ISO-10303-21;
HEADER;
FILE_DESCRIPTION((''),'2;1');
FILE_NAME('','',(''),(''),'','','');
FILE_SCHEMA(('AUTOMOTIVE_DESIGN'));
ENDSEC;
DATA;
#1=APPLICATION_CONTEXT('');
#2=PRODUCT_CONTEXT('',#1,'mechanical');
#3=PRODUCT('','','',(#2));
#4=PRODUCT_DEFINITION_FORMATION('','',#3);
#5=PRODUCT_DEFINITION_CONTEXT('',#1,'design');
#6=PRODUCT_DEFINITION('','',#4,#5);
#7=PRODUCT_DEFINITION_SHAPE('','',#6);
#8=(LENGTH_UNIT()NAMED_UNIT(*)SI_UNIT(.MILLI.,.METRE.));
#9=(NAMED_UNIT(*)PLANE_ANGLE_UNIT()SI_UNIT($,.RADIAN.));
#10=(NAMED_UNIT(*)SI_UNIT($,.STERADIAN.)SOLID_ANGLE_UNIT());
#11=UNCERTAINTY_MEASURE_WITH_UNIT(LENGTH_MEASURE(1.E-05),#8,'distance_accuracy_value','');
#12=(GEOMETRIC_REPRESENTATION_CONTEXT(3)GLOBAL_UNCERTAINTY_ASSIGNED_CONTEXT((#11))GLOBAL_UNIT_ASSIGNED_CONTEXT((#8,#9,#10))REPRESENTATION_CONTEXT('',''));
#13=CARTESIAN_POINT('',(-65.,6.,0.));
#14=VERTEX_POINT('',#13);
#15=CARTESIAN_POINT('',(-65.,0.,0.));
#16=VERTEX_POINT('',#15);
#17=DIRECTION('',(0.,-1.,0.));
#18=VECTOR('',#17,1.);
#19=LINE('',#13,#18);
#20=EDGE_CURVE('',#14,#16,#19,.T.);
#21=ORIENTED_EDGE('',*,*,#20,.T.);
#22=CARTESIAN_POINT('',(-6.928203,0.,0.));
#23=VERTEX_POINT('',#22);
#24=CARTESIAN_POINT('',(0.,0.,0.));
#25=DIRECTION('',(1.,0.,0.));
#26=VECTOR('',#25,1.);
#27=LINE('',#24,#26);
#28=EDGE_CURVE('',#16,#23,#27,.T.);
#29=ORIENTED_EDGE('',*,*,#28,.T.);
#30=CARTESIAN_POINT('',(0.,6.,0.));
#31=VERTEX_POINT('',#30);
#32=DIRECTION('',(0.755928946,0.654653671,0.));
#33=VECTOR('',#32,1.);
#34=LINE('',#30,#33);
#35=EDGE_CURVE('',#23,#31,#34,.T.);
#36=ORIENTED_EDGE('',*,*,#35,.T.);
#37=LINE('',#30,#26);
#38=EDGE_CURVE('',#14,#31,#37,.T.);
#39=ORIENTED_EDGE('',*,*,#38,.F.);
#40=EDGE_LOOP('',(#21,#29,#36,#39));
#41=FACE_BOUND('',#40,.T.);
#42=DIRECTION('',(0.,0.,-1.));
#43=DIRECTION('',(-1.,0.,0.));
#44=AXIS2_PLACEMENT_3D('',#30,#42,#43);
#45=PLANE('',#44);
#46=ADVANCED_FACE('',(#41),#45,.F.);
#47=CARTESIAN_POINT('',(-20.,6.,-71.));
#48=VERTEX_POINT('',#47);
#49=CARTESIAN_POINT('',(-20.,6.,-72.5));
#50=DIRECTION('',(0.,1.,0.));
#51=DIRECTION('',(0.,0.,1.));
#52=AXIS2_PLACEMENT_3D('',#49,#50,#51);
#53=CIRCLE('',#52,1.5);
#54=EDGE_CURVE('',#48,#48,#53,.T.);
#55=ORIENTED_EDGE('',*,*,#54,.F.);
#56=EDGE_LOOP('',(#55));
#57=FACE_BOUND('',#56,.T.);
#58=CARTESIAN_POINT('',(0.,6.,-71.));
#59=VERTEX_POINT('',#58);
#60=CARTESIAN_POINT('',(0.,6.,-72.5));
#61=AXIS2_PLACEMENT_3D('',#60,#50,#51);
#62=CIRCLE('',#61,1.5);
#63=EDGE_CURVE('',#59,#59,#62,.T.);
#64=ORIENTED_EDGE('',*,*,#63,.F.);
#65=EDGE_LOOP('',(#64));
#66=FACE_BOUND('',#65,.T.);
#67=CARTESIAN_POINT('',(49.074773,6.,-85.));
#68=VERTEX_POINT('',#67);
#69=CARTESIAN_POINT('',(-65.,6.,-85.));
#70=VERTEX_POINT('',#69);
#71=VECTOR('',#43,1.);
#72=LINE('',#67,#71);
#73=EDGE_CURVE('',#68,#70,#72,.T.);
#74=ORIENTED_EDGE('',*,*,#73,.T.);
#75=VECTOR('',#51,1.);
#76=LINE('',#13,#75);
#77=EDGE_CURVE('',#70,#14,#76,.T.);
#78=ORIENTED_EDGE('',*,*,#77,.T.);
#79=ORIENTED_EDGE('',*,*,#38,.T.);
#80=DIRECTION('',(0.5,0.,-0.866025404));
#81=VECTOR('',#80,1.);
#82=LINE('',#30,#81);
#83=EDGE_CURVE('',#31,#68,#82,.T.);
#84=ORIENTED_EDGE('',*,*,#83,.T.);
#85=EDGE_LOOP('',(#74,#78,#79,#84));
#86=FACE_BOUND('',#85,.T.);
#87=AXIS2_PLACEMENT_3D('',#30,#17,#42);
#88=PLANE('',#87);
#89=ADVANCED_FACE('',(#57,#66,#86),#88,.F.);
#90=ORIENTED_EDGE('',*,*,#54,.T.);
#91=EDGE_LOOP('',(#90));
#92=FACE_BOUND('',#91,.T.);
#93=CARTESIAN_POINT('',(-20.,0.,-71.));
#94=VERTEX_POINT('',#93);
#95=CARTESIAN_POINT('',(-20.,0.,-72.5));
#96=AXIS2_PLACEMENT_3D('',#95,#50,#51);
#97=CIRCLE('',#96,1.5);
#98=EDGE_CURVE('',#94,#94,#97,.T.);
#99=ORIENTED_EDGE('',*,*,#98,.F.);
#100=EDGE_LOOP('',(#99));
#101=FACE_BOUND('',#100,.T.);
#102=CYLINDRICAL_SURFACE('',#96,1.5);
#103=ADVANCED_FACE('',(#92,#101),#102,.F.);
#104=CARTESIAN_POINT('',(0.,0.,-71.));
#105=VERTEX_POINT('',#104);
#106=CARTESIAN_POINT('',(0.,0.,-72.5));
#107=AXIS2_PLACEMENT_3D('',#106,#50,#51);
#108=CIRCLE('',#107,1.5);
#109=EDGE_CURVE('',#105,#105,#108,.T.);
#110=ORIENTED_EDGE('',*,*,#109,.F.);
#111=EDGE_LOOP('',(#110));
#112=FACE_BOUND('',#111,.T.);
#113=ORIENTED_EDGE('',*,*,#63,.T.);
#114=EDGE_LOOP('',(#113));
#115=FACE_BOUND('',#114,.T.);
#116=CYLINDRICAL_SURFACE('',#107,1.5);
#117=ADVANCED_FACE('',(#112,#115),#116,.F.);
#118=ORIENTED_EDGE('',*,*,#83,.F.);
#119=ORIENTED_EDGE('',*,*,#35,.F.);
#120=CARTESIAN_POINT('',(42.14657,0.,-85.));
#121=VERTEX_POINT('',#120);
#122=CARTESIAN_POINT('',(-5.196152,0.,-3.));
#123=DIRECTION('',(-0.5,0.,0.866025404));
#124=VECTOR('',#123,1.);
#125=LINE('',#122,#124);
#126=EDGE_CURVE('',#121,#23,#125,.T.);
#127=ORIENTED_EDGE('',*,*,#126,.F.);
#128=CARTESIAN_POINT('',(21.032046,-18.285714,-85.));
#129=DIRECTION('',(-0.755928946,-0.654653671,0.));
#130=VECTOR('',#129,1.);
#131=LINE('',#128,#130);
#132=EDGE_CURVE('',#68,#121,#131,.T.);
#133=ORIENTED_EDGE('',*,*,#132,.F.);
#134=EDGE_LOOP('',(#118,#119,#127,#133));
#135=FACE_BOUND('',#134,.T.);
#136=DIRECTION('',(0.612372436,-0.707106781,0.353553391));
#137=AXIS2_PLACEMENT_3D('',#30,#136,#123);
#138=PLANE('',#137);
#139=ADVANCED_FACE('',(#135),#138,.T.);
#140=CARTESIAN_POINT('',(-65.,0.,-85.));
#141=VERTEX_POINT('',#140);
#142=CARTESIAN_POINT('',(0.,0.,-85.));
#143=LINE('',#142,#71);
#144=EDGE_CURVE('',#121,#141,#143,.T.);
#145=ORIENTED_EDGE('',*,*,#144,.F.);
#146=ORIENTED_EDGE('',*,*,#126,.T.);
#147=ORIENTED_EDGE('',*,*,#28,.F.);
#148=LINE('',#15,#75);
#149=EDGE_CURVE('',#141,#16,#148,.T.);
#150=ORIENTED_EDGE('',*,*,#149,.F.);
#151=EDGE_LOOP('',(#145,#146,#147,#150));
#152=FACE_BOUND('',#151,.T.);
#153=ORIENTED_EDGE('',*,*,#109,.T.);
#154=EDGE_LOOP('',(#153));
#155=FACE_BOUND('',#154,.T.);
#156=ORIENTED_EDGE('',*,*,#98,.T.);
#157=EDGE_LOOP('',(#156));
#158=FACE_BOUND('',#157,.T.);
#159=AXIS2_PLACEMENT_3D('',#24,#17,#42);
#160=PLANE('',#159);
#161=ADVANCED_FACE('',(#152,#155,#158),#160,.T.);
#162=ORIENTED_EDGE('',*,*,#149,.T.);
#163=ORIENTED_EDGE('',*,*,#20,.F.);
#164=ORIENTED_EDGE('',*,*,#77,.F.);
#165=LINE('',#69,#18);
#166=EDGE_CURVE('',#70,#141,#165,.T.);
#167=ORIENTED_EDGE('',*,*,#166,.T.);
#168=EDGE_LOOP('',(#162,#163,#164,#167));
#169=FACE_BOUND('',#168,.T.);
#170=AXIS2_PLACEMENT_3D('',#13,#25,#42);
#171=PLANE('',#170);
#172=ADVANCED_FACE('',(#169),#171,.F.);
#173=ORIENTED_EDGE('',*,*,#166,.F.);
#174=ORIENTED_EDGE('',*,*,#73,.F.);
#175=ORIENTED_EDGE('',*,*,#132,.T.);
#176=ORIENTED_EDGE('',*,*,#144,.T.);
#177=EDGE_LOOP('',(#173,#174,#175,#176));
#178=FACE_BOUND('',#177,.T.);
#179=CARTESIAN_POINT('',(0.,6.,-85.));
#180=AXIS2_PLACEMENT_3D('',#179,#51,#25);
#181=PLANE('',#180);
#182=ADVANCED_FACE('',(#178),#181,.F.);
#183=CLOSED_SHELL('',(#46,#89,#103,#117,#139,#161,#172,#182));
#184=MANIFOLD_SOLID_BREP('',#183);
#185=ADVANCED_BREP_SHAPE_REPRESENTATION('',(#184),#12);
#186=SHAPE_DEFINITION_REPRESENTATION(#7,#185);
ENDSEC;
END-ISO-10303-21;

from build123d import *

# Parameters (mm, degrees)
BOSS_EXTRUDE1_DEPTH = 6
SKETCH2_R           = 1.5
CUT_EXTRUDE1_DEPTH  = 108.172757733
CHAMFER1_SIZE       = 6


with BuildPart() as part:
    # Sketch1 → Boss-Extrude1 (new body)
    with BuildSketch(Plane(origin=(0, 0, 0), x_dir=(1, 0, 0), z_dir=(0, 1, 0))):
        Polygon((0, 0), (49.074772881, 85), (0, 85), (-65, 85), (-65, 0), align=None)
    extrude(amount=BOSS_EXTRUDE1_DEPTH)

    # Sketch2 → Cut-Extrude1 (cut, through all)
    with BuildSketch(Plane(origin=(0, 6, 0), x_dir=(1, 0, 0), z_dir=(0, 1, 0))):
        with Locations(Location((-20, 72.5, 0), (0, 0, 270))):
            Circle(SKETCH2_R)
        with Locations(Location((0, 72.5, 0), (0, 0, 270))):
            Circle(SKETCH2_R)
    extrude(amount=-CUT_EXTRUDE1_DEPTH, mode=Mode.SUBTRACT)

    # Chamfer1
    chamfer1_edges = [part.edges().sort_by_distance(p)[0] for p in [
        (24.537386441, 0, -42.5),
    ]]
    chamfer(chamfer1_edges, length=CHAMFER1_SIZE - 0.0001)  # a hair under: the kernel refuses the full size


solid = part.part
